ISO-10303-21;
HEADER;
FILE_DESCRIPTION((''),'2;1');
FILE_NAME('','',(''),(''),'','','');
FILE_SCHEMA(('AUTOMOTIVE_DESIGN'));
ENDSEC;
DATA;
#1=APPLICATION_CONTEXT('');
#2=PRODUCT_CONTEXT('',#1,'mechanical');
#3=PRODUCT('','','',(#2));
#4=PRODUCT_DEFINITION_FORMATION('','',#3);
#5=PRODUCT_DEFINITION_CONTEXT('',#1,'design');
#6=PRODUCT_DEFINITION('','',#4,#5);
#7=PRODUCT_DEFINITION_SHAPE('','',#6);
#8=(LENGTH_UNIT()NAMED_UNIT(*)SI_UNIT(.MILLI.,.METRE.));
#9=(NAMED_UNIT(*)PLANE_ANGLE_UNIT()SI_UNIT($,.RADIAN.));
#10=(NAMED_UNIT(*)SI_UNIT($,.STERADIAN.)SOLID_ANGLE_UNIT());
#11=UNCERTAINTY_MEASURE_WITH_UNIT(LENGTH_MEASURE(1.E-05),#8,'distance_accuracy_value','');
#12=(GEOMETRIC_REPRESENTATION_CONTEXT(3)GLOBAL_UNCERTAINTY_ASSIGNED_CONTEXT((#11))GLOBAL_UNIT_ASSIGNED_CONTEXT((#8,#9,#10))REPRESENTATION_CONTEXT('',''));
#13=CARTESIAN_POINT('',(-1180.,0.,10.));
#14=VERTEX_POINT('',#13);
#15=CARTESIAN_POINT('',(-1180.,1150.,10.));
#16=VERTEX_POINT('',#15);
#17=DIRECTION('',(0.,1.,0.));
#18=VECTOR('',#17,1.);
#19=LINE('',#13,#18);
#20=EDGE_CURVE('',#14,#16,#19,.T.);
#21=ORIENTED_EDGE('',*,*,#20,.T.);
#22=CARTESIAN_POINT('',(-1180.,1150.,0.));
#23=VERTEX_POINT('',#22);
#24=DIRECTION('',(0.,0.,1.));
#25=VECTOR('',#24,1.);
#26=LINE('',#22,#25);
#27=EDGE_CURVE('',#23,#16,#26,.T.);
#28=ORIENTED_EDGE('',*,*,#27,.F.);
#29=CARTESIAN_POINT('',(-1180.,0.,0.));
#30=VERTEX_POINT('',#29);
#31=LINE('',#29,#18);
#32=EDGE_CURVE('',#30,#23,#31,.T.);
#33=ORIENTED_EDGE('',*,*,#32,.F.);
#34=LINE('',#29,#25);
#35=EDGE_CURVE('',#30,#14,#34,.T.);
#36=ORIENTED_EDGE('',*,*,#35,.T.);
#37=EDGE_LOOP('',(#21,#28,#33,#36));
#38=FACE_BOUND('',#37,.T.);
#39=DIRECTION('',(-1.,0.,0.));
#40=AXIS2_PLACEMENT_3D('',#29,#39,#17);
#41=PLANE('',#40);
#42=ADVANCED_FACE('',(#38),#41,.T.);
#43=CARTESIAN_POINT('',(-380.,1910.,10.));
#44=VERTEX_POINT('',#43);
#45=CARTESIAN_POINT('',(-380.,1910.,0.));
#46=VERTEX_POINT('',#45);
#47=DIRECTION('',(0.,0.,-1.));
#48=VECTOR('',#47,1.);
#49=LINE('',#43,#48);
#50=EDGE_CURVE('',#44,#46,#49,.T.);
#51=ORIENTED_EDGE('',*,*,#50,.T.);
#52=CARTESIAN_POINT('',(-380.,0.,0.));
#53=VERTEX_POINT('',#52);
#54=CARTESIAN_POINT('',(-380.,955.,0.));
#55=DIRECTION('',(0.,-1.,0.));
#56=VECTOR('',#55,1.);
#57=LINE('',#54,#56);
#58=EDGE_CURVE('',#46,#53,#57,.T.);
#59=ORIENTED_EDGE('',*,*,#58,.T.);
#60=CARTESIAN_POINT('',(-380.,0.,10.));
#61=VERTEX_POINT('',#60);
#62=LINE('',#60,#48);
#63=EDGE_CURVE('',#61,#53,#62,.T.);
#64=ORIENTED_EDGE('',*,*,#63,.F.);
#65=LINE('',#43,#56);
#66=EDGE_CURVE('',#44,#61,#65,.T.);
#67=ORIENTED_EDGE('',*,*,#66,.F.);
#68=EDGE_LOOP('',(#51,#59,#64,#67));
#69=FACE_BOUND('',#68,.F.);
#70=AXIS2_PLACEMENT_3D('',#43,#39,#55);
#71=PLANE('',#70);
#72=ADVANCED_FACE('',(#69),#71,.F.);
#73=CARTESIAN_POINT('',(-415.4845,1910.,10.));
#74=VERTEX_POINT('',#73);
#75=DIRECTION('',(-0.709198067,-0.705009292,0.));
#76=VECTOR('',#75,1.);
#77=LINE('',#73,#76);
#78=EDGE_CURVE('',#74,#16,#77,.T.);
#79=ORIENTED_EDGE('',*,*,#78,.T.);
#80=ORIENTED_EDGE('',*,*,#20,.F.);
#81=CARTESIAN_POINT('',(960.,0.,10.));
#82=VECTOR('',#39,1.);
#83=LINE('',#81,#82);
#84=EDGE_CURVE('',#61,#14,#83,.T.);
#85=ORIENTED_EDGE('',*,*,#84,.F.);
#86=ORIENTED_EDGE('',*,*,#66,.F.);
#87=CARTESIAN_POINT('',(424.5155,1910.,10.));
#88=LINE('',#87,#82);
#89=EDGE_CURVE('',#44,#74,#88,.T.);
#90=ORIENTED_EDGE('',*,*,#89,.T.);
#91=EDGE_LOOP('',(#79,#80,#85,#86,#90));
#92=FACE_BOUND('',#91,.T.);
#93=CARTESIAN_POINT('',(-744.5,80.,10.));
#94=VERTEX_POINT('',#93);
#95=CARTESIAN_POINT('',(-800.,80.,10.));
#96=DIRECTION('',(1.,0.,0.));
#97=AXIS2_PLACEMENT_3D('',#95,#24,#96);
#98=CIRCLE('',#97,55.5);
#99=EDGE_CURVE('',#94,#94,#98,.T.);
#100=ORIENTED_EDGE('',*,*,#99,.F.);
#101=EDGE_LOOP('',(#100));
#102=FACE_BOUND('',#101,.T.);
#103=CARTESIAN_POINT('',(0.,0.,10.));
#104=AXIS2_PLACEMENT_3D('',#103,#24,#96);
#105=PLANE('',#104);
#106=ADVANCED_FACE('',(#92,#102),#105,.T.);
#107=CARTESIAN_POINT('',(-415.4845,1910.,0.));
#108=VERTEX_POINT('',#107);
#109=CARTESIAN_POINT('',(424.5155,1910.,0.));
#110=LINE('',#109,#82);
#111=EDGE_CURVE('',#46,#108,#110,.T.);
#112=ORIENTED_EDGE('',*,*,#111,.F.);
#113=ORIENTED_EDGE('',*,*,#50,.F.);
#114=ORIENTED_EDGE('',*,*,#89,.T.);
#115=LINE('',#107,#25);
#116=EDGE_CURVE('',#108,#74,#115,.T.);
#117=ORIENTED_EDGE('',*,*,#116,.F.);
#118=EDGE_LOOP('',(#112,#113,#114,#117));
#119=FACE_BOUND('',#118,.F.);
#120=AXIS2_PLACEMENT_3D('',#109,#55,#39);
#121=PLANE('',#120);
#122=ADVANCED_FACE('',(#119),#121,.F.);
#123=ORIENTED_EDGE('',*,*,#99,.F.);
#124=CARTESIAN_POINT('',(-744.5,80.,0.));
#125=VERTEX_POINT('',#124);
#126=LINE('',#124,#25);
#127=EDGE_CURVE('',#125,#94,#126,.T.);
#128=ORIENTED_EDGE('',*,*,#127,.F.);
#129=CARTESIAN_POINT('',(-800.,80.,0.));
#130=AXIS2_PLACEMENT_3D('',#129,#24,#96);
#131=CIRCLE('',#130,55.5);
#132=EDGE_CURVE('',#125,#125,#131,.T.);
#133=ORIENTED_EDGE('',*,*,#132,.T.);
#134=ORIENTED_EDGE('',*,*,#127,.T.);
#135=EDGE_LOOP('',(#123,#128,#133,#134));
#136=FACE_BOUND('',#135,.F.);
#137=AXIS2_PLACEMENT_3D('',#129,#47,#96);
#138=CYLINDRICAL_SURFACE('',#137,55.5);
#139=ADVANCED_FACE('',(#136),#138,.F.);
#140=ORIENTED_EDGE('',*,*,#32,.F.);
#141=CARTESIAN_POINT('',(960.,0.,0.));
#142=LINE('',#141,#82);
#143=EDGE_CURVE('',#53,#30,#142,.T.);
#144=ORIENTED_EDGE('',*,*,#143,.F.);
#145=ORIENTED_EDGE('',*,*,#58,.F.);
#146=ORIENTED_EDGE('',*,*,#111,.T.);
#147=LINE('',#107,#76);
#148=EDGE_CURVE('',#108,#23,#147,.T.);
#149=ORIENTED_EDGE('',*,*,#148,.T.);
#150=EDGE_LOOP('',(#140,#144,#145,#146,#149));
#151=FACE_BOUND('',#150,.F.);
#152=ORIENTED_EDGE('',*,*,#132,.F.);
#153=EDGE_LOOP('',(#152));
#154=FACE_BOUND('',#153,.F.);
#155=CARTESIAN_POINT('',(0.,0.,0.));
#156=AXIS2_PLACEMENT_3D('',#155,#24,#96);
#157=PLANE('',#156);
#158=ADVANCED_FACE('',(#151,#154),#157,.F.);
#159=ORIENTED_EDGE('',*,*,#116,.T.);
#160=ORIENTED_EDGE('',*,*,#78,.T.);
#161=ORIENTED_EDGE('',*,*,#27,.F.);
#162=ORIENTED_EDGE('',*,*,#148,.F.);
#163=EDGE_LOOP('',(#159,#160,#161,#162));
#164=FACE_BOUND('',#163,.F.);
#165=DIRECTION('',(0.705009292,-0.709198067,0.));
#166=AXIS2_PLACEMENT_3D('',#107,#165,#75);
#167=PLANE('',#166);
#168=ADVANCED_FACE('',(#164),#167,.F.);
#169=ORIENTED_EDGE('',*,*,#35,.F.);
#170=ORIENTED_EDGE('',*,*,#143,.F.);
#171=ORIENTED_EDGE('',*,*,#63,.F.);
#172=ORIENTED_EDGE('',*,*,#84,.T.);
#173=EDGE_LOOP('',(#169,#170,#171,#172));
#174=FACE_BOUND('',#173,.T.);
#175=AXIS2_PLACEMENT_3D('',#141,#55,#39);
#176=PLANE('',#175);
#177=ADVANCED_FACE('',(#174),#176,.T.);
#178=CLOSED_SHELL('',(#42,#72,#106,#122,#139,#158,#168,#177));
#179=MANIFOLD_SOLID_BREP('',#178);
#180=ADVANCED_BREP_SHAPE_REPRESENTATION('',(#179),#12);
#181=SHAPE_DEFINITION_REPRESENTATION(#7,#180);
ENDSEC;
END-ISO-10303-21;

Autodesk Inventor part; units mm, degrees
ref_plane "YZ Plane" through (0, 0, 0) normal (1, 0, 0) x (0, 1, 0)
ref_plane "XZ Plane" through (0, 0, 0) normal (0, 1, 0) x (-1, 0, 0)
ref_plane "XY Plane" through (0, 0, 0) normal (0, 0, 1) x (1, 0, 0)
sketch "Sketch1" plane through (0, 0, 0) normal (0, 0, 1) x (1, 0, 0)
  line L0 (0, 0) -> (0, 1910) construction
  line L1 (424.5155, 1910) -> (-415.4845, 1910)
  line L2 (-415.4845, 1910) -> (-1180, 1150)
  line L3 (-1180, 0) -> (-1180, 1150)
  line L4 (960, 0) -> (960, 1342.8524)
  line L5 (424.5155, 1910) -> (960, 1342.8524)
  circle A0 centre (0, 950) radius 265 construction
  line L6 (960, 0) -> (-1180, 0)
  circle A1 centre (-1701.6377, -269.2167) radius 188.5 construction
  circle A2 centre (-800, 80) radius 55.5
  circle A3 centre (0, 950) radius 170
  line L7 (0, 1215) -> (0, 1120) construction
  line L8 (-721.2646, 955) -> (721.2646, 955) construction
  line L9 (-169.9265, 955) -> (-174.9265, 955) construction
  line L10 (-174.9265, 960) -> (-174.9265, 950)
  line L11 (-174.9265, 960) -> (-169.7056, 960)
  line L12 (-174.9265, 950) -> (-170, 950)
  line L13 (169.9265, 955) -> (174.9265, 955) construction
  line L14 (174.9265, 960) -> (174.9265, 950)
  line L15 (169.7056, 960) -> (174.9265, 960)
  line L16 (174.9265, 950) -> (170, 950)
  line L17 (-174.9265, 970) -> (174.9265, 970)
  line L18 (174.9265, 970) -> (174.9265, 940)
  line L19 (174.9265, 940) -> (-174.9265, 940)
  line L20 (-174.9265, 940) -> (-174.9265, 970)
  arc A4 (-2.4999, 780.0184) -> (2.4999, 780.0184) centre (0, 780) ccw
  arc A5 (2.4999, 1119.9816) -> (-2.4999, 1119.9816) centre (0, 1120) ccw
  point P0 (0, 955)
  point P1 (-169.7056, 940)
  point P2 (169.7056, 940)
  point P3 (168.8194, 970)
  point P4 (-168.8194, 970)
  dimension "d52" = 530
  dimension "d72" = 340
  dimension "d1" = 840
  dimension "d3" = 1150
  dimension "d12" = 1180
  dimension "d13" = 950
  dimension "d14" = 111
  dimension "d15" = 1910
  dimension "d17" = -521.6377
  dimension "d18" = 377
  dimension "d19" = -269.2167
  dimension "d34" = 380
  dimension "d35" = 80
  dimension "d37" = 2140
  dimension "d53" = 5
  dimension "d54" = 10
  dimension "d55" = 30
  dimension "d67" = 5
  dimension "d68" = 5
  dimension "d69" = 780
  dimension "d71" = 1078
extrude "Extrusion1" add sketch "Sketch1" along normal blind 10 contours L5 L4 L6 L3 L2 L1 | A3 L19 L17 | L16 L18 L19 A3 | A3 L15 L14 L16 | A3 L17 L18 L15 | L19 L20 L12 A3 | A3 L11 L20 L17 | L12 L10 L11 A3
fillet "Fillet1" radius 10 4 edges at (-168.8194, 970, 5) (-169.7056, 940, 5) (168.8194, 970, 5) (169.7056, 940, 5)
sketch "Sketch4" plane through (0, 0, 0) normal (0, 0, 1) x (1, 0, 0)
  circle A0 centre (-51.6989, 1209.9081) radius 6.5
  arc A1 (-2.4999, 1119.9816) -> (-166.985, 981.875) centre (0, 950) ccw projected
  line L0 (0, 950) -> (0, 1196.7062) construction
  line L1 (-51.6989, 1209.9081) -> (0, 950) construction
  point P0 (0, 0)
  point P1 (-5, 1149.9375)
  dimension "d59" = 265
  dimension "d60" = 13
  dimension "d61" = 11.25
extrude "Extrusion4" cut sketch "Sketch4" along normal blind 10
pattern_circular "Circular Pattern3" count 16 over 360 about axis through (0, 950, 0) along (0, 0, 1) of "Extrusion4"
sketch "Sketch5" plane through (0, 0, 10) normal (0, 0, 1) x (1, 0, 0)
  circle A0 centre (51.6989, 1209.9081) radius 6.5 projected
  circle A1 centre (147.2261, 1170.3394) radius 6.5 projected
  circle A2 centre (220.3394, 1097.2261) radius 6.5 projected
  circle A3 centre (259.9081, 1001.6989) radius 6.5 projected
  circle A4 centre (259.9081, 898.3011) radius 6.5 projected
  circle A5 centre (220.3394, 802.7739) radius 6.5 projected
  circle A6 centre (147.2261, 729.6606) radius 6.5 projected
  circle A7 centre (51.6989, 690.0919) radius 6.5 projected
  circle A8 centre (-51.6989, 690.0919) radius 6.5 projected
  circle A9 centre (-147.2261, 729.6606) radius 6.5 projected
  circle A10 centre (-220.3394, 802.7739) radius 6.5 projected
  circle A11 centre (-259.9081, 898.3011) radius 6.5 projected
  circle A12 centre (-259.9081, 1001.6989) radius 6.5 projected
  circle A13 centre (-220.3394, 1097.2261) radius 6.5 projected
  circle A14 centre (-147.2261, 1170.3394) radius 6.5 projected
  circle A15 centre (-51.6989, 1209.9081) radius 6.5 projected
  line L0 (960, 1342.8524) -> (424.5155, 1910) projected
  line L1 (424.5155, 1910) -> (-415.4845, 1910) projected
  line L2 (-415.4845, 1910) -> (-1180, 1150) projected
  line L3 (-1180, 1150) -> (-1180, 0) projected
  line L4 (-1180, 0) -> (960, 0) projected
  line L5 (960, 0) -> (960, 1342.8524) projected
  arc A16 (2.4999, 780.0184) -> (168.6666, 928.75) centre (0, 950) ccw projected
  arc A17 (-2.4999, 780.0184) -> (2.4999, 780.0184) centre (0, 780) ccw projected
  arc A18 (-168.6666, 928.75) -> (-2.4999, 780.0184) centre (0, 950) ccw projected
  arc A19 (-158.7451, 940) -> (-168.6666, 928.75) centre (-158.7451, 930) ccw projected
  line L6 (-158.7451, 940) -> (158.7451, 940) projected
  arc A20 (168.6666, 928.75) -> (158.7451, 940) centre (158.7451, 930) ccw projected
  circle A21 centre (-800, 80) radius 55.5 projected
  line L7 (157.1623, 970) -> (-157.1623, 970) projected
  arc A22 (-166.985, 981.875) -> (-157.1623, 970) centre (-157.1623, 980) ccw projected
  arc A23 (-2.4999, 1119.9816) -> (-166.985, 981.875) centre (0, 950) ccw projected
  arc A24 (2.4999, 1119.9816) -> (-2.4999, 1119.9816) centre (0, 1120) ccw projected
  arc A25 (166.985, 981.875) -> (2.4999, 1119.9816) centre (0, 950) ccw projected
  arc A26 (157.1623, 970) -> (166.985, 981.875) centre (157.1623, 980) ccw projected
  line L8 (424.5155, 1910) -> (-415.4845, 1910) projected
  line L9 (-380, 1910) -> (-380, 0)
  point P0 (0, 0)
  dimension "d73" = 1340
extrude "Extrusion5" cut sketch "Sketch5" against normal through all contours L5 L4 L9 L1 L0
properties part number "ДМФ 011 Стенка Корма ЛЕВ v2.0"
